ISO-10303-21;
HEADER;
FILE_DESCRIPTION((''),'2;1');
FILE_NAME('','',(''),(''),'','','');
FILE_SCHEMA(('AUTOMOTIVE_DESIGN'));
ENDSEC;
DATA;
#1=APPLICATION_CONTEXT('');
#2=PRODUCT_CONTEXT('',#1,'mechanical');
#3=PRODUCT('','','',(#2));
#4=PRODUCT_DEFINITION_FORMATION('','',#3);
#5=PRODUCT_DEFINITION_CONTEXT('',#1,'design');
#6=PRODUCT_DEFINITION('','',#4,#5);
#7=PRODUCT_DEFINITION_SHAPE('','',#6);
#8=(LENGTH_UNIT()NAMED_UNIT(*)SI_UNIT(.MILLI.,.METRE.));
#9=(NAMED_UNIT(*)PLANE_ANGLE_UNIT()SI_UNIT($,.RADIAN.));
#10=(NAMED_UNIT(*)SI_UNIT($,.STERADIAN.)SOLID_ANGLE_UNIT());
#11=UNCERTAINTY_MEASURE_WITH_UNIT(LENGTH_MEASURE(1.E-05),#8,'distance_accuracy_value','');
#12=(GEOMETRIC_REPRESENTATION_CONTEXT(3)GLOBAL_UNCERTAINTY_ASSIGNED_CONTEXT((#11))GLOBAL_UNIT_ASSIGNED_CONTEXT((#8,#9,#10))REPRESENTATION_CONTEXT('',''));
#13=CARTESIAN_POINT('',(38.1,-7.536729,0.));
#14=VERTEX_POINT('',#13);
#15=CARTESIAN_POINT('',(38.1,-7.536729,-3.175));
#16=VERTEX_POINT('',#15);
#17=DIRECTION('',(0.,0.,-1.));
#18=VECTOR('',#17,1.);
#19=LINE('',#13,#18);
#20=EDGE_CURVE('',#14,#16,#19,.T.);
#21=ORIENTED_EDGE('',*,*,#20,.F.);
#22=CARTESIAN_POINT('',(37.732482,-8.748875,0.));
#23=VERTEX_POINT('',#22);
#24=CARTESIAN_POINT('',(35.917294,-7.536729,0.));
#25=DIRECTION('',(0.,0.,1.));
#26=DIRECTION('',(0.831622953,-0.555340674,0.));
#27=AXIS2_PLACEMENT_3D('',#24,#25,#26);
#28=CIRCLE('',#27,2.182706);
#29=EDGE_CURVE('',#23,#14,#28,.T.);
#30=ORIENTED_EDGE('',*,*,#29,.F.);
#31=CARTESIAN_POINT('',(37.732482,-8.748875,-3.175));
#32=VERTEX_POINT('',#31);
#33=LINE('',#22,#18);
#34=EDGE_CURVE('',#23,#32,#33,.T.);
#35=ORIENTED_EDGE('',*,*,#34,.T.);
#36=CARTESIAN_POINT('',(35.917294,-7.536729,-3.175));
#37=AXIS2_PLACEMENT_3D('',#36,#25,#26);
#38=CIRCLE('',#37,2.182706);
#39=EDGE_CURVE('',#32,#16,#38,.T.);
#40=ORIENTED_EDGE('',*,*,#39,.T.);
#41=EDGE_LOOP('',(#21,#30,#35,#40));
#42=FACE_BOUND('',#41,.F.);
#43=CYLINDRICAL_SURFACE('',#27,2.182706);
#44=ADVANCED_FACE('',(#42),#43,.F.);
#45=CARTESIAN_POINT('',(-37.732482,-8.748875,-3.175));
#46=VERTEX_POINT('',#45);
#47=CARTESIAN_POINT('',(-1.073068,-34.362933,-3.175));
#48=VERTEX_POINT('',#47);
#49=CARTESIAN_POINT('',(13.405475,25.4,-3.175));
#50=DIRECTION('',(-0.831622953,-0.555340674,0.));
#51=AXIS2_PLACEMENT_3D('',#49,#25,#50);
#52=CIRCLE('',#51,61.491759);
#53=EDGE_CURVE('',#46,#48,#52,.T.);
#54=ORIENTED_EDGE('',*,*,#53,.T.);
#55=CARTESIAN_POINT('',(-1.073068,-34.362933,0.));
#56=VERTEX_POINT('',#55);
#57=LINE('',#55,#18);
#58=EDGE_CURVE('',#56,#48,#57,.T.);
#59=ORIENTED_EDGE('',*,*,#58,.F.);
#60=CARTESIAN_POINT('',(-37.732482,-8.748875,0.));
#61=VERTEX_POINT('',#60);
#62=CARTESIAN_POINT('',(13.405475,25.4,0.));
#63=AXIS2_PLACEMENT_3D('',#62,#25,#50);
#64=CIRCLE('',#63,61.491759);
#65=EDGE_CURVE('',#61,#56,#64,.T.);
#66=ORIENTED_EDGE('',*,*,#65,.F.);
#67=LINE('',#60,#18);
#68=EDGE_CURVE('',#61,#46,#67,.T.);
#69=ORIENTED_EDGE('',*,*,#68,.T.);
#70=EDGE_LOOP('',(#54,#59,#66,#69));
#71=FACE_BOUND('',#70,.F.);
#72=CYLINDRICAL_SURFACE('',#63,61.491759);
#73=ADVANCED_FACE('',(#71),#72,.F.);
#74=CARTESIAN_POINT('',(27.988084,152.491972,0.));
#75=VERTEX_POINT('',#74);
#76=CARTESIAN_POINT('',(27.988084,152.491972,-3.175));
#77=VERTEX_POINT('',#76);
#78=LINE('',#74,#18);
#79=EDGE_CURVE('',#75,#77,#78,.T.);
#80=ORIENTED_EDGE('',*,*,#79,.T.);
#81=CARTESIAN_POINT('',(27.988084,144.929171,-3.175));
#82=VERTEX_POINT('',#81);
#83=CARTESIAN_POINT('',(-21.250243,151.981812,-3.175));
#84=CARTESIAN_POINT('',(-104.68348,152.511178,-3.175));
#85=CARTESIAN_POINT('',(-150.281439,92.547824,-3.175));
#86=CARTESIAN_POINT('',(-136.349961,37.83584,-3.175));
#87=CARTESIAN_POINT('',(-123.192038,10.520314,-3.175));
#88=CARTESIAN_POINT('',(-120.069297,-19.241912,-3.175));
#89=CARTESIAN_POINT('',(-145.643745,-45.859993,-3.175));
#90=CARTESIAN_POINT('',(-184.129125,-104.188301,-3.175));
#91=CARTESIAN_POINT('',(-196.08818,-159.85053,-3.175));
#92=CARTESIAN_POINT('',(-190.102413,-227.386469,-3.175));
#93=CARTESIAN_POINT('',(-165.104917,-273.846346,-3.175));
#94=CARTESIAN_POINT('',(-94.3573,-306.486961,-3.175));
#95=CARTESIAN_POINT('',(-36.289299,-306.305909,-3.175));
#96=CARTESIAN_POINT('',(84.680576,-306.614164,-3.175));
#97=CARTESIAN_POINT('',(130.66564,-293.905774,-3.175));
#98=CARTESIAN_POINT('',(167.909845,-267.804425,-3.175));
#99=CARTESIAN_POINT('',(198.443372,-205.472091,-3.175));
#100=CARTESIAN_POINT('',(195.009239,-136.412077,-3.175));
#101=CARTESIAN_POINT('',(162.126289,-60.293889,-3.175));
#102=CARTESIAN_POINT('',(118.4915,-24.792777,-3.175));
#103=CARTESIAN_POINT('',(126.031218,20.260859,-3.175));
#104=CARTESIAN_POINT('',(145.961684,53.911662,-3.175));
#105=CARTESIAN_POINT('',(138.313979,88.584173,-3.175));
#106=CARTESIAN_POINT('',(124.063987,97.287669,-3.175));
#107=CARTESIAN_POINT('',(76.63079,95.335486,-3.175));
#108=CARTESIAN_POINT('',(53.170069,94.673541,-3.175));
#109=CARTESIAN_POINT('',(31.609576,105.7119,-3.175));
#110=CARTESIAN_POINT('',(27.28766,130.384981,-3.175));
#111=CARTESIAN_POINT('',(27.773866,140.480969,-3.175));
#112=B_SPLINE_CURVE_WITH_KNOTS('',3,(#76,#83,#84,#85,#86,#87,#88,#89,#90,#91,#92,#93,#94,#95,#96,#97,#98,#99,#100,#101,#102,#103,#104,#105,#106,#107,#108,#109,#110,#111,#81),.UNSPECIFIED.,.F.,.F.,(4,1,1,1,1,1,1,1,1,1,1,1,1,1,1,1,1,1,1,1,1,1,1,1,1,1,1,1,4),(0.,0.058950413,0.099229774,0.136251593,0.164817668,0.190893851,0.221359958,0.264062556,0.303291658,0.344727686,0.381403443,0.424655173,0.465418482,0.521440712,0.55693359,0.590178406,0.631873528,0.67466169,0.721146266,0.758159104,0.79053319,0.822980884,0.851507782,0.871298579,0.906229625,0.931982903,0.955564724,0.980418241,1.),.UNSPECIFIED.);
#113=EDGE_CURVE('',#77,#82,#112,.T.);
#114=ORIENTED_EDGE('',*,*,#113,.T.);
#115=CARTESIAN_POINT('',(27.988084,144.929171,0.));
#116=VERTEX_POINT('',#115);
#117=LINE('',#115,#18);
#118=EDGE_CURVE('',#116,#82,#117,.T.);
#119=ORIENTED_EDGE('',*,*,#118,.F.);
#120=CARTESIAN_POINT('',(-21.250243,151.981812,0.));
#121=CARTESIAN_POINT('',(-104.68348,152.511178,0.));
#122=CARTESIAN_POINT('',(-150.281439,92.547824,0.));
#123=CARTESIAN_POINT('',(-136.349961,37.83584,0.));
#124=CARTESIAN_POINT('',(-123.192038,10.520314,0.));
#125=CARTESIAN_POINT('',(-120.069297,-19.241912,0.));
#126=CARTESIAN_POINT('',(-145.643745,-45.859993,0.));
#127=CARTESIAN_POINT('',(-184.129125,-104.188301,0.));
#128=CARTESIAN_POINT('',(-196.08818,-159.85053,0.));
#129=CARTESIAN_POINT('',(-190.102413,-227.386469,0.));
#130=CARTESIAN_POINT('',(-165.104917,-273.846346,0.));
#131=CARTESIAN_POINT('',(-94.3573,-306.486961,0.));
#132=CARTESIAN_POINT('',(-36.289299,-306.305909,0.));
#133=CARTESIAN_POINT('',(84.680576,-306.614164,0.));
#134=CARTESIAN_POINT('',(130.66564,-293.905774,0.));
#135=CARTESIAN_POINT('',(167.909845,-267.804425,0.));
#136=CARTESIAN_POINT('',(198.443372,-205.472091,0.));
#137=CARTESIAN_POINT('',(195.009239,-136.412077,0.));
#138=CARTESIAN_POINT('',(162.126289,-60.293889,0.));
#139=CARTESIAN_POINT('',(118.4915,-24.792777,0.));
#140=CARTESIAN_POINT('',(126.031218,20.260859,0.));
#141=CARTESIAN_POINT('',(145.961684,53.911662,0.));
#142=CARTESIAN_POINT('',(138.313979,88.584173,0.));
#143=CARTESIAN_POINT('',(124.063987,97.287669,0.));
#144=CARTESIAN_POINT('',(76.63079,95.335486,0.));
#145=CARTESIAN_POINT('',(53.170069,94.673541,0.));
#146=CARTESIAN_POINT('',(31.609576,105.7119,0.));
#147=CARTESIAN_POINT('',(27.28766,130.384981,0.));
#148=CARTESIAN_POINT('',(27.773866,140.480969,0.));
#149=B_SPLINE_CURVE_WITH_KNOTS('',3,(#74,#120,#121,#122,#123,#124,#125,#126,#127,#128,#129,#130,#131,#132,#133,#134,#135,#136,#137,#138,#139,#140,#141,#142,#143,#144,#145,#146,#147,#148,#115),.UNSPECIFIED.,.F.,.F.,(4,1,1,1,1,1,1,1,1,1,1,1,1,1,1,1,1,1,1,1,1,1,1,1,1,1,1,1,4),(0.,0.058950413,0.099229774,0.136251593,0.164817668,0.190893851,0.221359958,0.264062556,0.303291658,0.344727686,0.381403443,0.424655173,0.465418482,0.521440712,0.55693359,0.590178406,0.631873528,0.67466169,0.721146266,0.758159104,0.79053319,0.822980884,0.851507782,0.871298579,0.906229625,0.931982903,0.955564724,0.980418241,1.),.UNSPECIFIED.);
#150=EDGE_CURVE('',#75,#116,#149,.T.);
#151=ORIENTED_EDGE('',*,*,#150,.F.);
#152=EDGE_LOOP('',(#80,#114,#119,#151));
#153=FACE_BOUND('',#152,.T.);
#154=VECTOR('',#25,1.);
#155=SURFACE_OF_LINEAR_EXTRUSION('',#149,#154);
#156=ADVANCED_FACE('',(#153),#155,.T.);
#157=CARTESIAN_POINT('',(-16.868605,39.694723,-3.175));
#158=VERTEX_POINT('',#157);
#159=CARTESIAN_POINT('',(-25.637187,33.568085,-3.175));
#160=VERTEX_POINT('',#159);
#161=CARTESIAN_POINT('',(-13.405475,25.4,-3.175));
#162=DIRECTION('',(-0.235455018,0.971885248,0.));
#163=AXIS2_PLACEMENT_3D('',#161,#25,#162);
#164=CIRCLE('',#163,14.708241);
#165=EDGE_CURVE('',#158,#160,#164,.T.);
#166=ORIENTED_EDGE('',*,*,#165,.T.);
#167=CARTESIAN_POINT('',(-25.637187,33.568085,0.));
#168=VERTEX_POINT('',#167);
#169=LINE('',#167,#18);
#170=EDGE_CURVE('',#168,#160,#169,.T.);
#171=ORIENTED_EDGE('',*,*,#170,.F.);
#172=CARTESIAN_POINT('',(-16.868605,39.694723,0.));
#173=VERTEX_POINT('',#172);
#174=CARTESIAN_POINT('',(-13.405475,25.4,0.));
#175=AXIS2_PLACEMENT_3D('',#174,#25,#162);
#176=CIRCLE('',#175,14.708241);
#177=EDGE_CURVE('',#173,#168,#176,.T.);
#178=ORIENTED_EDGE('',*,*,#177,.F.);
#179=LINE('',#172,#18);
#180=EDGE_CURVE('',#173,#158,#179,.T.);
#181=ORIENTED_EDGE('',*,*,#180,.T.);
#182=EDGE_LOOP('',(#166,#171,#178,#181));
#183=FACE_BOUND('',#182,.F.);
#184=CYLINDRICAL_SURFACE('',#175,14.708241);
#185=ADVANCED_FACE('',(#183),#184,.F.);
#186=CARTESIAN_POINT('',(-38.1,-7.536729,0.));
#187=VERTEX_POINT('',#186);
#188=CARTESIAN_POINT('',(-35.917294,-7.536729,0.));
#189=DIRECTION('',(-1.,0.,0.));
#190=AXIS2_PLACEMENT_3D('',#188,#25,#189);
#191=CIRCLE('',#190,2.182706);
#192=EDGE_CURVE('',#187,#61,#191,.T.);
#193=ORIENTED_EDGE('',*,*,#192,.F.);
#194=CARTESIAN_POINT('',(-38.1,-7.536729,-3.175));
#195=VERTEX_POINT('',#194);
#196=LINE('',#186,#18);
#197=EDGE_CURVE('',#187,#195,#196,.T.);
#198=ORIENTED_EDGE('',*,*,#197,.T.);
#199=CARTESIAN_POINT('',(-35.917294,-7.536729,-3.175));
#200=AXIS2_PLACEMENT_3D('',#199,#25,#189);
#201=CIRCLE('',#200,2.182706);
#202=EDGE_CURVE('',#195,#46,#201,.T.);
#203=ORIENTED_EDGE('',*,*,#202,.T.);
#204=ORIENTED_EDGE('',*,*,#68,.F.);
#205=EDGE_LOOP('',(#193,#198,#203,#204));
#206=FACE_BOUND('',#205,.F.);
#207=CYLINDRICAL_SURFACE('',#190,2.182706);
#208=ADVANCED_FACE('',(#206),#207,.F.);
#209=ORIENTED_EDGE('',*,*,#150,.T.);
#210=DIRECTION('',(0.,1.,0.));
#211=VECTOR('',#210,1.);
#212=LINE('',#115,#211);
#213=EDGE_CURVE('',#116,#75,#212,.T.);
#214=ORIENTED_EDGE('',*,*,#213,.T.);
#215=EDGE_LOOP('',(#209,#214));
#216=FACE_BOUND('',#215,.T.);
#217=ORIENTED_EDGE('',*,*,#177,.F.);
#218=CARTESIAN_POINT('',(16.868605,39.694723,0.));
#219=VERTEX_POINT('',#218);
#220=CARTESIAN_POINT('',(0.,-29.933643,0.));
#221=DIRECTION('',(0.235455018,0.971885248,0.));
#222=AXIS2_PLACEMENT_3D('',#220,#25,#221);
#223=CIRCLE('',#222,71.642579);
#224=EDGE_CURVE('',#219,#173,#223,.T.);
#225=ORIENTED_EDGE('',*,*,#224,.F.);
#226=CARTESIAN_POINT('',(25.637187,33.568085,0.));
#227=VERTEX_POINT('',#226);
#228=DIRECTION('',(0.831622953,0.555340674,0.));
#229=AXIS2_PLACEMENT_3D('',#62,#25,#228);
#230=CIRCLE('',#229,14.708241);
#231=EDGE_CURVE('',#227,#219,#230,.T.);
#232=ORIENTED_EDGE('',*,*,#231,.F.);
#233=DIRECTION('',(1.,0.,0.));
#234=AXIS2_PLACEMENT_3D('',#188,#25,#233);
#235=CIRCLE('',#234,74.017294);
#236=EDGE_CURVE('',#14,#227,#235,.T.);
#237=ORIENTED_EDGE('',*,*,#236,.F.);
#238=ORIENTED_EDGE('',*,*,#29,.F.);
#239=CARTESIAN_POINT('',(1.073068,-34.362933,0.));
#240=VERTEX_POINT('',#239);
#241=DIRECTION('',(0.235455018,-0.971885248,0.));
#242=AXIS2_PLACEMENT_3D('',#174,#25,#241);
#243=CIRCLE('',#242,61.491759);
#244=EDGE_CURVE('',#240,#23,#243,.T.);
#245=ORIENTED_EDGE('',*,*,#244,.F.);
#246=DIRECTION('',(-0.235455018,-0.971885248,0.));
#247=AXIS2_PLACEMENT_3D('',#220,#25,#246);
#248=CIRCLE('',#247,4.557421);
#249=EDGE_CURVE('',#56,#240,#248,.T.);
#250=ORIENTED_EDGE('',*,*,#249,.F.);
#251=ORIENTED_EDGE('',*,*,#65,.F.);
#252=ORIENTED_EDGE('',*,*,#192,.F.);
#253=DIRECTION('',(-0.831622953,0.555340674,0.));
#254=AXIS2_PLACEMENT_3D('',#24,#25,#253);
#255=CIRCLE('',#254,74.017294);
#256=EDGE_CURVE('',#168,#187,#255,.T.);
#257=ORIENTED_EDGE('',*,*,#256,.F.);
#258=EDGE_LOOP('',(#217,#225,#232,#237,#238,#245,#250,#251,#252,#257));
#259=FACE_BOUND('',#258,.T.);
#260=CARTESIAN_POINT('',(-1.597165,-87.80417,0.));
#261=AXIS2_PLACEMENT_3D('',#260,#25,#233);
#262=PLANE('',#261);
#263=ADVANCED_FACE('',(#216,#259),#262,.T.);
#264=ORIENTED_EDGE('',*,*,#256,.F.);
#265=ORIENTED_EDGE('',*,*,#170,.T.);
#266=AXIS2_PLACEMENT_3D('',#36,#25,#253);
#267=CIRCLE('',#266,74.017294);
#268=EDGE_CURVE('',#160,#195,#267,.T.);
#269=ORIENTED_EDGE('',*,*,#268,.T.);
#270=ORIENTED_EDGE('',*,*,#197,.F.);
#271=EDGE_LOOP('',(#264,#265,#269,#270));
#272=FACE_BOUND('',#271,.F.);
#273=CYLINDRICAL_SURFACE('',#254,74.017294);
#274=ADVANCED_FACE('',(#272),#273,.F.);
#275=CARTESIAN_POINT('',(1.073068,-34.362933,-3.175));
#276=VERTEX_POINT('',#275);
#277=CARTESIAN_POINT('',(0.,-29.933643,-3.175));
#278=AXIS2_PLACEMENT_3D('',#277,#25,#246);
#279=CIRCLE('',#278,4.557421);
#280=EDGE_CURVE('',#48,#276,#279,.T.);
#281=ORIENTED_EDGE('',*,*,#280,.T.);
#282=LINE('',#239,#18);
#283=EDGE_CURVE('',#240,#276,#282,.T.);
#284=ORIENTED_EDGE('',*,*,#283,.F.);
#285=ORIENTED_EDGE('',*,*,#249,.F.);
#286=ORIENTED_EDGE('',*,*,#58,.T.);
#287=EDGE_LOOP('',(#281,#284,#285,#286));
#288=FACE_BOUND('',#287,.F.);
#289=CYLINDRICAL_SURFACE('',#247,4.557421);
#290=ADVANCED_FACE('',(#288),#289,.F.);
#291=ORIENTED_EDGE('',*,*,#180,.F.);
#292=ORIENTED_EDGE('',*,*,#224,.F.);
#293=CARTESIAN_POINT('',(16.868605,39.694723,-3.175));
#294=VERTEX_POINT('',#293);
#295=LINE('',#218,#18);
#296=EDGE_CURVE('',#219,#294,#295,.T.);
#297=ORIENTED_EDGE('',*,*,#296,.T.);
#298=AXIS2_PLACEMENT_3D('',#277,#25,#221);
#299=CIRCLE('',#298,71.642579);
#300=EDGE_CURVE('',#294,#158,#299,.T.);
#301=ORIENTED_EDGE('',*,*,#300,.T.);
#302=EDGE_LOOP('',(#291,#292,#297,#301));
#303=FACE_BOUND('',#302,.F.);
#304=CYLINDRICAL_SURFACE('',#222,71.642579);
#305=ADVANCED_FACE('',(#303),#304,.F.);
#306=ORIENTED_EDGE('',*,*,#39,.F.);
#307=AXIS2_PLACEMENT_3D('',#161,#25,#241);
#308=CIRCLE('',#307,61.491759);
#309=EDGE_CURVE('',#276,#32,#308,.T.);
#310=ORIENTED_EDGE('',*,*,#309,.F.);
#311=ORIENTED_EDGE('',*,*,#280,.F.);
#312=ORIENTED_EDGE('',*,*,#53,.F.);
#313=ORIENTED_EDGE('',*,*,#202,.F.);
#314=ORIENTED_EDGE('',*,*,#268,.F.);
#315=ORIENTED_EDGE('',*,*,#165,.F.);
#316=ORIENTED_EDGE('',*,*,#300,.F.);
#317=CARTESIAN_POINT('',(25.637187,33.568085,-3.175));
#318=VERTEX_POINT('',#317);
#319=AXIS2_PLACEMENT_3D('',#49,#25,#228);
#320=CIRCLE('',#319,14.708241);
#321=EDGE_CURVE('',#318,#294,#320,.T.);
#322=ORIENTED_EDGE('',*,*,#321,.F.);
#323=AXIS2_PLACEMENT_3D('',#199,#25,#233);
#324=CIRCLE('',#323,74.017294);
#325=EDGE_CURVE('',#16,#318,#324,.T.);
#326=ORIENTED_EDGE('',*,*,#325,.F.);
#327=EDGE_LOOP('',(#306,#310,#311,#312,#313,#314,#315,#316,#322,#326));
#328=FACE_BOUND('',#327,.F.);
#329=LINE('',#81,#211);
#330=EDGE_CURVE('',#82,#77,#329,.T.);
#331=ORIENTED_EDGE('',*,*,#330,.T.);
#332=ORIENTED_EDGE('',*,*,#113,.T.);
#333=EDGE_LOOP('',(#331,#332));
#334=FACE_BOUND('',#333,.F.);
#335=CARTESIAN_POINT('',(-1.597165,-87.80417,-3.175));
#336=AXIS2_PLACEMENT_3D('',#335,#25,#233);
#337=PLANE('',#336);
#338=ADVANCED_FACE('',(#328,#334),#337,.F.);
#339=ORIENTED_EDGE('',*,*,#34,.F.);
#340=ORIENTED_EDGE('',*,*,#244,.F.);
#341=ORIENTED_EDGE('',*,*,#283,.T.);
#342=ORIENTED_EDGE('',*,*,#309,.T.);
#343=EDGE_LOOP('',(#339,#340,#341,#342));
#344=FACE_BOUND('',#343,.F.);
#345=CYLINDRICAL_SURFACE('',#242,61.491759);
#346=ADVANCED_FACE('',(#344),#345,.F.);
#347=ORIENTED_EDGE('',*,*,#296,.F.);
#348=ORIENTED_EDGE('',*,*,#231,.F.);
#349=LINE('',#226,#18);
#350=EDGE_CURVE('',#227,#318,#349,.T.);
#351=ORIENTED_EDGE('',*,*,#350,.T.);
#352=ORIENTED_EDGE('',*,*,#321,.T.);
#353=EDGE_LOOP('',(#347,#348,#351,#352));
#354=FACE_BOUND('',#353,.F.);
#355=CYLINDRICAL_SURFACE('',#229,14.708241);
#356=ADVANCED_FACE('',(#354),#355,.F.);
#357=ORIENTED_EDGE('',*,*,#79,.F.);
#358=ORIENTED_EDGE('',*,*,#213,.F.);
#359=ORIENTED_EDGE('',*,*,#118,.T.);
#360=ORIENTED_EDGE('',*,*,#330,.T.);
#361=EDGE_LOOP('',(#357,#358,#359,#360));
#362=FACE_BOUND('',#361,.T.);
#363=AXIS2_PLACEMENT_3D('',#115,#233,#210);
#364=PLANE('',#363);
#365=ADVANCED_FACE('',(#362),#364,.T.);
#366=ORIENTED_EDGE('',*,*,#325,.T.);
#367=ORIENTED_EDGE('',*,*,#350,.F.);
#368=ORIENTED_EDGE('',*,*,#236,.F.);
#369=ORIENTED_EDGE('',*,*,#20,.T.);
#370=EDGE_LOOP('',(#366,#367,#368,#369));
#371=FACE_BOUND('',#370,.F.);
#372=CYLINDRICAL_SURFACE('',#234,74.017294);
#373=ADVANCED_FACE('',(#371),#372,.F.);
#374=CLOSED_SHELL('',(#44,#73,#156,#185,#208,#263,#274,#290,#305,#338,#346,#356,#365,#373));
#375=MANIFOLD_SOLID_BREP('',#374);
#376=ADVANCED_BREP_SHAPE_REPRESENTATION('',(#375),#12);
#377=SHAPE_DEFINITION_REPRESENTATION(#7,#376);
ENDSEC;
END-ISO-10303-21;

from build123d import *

# Parameters (mm, degrees)
F2_DEPTH = 3.175
F3_DEPTH = 25.4


# Not quite as in the source:
# - a length typed as a fraction of an inch, garbled in the dataset ("3 / 203.2 mm" for 3/8 in), is restored


with BuildPart() as f2:
    # F1 (on Top) → F2 (new body)
    with BuildSketch(Plane.XY):
        with BuildLine():
            Line((27.9880836606, 144.9291706085), (27.9880836606, 152.4919718504))
            add(Edge.make_bspline(
                [(27.9880836606, 152.4919718504), (-21.2502434403, 151.9818123943), (-104.683480426, 152.5111781702), (-150.2814387338, 92.5478236213), (-136.3499609731, 37.8358402777), (-123.192038006, 10.5203140923), (-120.0692970968, -19.2419116422), (-145.6437445747, -45.8599929551), (-184.1291247278, -104.1883013851), (-196.0881801563, -159.8505304336), (-190.1024130042, -227.3864691226), (-165.1049172353, -273.8463464795), (-94.3572995114, -306.4869610902), (-36.2892985312, -306.3059086721), (84.6805760335, -306.6141635236), (130.6656399599, -293.9057736233), (167.9098450774, -267.8044247049), (198.4433715448, -205.4720909521), (195.0092388083, -136.4120768934), (162.1262885831, -60.2938889287), (118.4914998889, -24.7927772039), (126.0312180506, 20.2608585453), (145.9616839168, 53.9116622232), (138.3139785197, 88.5841734777), (124.0639874193, 97.2876685095), (76.6307897746, 95.335485595), (53.1700687674, 94.6735408278), (31.6095759071, 105.7118995447), (27.2876604892, 130.3849807454), (27.7738659058, 140.4809686851), (27.9880836606, 144.9291706085)],
                knots=[0, 0, 0, 0, 0.0589504135, 0.0992297739, 0.1362515931, 0.164817668, 0.1908938507, 0.221359958, 0.2640625563, 0.303291658, 0.3447276857, 0.3814034425, 0.4246551727, 0.4654184817, 0.5214407122, 0.5569335895, 0.5901784057, 0.6318735276, 0.6746616904, 0.7211462663, 0.7581591041, 0.7905331897, 0.8229808841, 0.851507782, 0.8712985789, 0.9062296252, 0.9319829029, 0.9555647239, 0.9804182413, 1, 1, 1, 1], degree=3))
        make_face()
    extrude(amount=-F2_DEPTH)

    # F0 (on Top) → F3 (cut)
    with BuildSketch(Plane.XY):
        with BuildLine():
            ThreePointArc((-16.8686046723, 39.694722813), (-21.8296031184, 37.4568004538), (-25.6371865623, 33.5680846779))
            ThreePointArc((-25.6371865623, 33.5680846779), (-34.9158052402, 13.9395799822), (-38.1, -7.5367294048))
            ThreePointArc((-38.1, -7.5367294048), (-38.0061008622, -8.1700471152), (-37.7324824564, -8.7488746701))
            ThreePointArc((-37.7324824564, -8.7488746701), (-21.8138558814, -25.0066967788), (-1.0730676971, -34.3629330545))
            ThreePointArc((-1.0730676971, -34.3629330545), (0, -34.4910638238), (1.0730676971, -34.3629330545))
            ThreePointArc((1.0730676971, -34.3629330545), (21.8138558814, -25.0066967788), (37.7324824564, -8.7488746701))
            ThreePointArc((37.7324824564, -8.7488746701), (38.0061008622, -8.1700471152), (38.1, -7.5367294048))
            ThreePointArc((38.1, -7.5367294048), (34.9158052402, 13.9395799822), (25.6371865623, 33.5680846779))
            ThreePointArc((25.6371865623, 33.5680846779), (21.8296031184, 37.4568004538), (16.8686046723, 39.694722813))
            ThreePointArc((16.8686046723, 39.694722813), (0, 41.7089361762), (-16.8686046723, 39.694722813))
        make_face()
    extrude(amount=-F3_DEPTH, mode=Mode.SUBTRACT)


solid = f2.part
